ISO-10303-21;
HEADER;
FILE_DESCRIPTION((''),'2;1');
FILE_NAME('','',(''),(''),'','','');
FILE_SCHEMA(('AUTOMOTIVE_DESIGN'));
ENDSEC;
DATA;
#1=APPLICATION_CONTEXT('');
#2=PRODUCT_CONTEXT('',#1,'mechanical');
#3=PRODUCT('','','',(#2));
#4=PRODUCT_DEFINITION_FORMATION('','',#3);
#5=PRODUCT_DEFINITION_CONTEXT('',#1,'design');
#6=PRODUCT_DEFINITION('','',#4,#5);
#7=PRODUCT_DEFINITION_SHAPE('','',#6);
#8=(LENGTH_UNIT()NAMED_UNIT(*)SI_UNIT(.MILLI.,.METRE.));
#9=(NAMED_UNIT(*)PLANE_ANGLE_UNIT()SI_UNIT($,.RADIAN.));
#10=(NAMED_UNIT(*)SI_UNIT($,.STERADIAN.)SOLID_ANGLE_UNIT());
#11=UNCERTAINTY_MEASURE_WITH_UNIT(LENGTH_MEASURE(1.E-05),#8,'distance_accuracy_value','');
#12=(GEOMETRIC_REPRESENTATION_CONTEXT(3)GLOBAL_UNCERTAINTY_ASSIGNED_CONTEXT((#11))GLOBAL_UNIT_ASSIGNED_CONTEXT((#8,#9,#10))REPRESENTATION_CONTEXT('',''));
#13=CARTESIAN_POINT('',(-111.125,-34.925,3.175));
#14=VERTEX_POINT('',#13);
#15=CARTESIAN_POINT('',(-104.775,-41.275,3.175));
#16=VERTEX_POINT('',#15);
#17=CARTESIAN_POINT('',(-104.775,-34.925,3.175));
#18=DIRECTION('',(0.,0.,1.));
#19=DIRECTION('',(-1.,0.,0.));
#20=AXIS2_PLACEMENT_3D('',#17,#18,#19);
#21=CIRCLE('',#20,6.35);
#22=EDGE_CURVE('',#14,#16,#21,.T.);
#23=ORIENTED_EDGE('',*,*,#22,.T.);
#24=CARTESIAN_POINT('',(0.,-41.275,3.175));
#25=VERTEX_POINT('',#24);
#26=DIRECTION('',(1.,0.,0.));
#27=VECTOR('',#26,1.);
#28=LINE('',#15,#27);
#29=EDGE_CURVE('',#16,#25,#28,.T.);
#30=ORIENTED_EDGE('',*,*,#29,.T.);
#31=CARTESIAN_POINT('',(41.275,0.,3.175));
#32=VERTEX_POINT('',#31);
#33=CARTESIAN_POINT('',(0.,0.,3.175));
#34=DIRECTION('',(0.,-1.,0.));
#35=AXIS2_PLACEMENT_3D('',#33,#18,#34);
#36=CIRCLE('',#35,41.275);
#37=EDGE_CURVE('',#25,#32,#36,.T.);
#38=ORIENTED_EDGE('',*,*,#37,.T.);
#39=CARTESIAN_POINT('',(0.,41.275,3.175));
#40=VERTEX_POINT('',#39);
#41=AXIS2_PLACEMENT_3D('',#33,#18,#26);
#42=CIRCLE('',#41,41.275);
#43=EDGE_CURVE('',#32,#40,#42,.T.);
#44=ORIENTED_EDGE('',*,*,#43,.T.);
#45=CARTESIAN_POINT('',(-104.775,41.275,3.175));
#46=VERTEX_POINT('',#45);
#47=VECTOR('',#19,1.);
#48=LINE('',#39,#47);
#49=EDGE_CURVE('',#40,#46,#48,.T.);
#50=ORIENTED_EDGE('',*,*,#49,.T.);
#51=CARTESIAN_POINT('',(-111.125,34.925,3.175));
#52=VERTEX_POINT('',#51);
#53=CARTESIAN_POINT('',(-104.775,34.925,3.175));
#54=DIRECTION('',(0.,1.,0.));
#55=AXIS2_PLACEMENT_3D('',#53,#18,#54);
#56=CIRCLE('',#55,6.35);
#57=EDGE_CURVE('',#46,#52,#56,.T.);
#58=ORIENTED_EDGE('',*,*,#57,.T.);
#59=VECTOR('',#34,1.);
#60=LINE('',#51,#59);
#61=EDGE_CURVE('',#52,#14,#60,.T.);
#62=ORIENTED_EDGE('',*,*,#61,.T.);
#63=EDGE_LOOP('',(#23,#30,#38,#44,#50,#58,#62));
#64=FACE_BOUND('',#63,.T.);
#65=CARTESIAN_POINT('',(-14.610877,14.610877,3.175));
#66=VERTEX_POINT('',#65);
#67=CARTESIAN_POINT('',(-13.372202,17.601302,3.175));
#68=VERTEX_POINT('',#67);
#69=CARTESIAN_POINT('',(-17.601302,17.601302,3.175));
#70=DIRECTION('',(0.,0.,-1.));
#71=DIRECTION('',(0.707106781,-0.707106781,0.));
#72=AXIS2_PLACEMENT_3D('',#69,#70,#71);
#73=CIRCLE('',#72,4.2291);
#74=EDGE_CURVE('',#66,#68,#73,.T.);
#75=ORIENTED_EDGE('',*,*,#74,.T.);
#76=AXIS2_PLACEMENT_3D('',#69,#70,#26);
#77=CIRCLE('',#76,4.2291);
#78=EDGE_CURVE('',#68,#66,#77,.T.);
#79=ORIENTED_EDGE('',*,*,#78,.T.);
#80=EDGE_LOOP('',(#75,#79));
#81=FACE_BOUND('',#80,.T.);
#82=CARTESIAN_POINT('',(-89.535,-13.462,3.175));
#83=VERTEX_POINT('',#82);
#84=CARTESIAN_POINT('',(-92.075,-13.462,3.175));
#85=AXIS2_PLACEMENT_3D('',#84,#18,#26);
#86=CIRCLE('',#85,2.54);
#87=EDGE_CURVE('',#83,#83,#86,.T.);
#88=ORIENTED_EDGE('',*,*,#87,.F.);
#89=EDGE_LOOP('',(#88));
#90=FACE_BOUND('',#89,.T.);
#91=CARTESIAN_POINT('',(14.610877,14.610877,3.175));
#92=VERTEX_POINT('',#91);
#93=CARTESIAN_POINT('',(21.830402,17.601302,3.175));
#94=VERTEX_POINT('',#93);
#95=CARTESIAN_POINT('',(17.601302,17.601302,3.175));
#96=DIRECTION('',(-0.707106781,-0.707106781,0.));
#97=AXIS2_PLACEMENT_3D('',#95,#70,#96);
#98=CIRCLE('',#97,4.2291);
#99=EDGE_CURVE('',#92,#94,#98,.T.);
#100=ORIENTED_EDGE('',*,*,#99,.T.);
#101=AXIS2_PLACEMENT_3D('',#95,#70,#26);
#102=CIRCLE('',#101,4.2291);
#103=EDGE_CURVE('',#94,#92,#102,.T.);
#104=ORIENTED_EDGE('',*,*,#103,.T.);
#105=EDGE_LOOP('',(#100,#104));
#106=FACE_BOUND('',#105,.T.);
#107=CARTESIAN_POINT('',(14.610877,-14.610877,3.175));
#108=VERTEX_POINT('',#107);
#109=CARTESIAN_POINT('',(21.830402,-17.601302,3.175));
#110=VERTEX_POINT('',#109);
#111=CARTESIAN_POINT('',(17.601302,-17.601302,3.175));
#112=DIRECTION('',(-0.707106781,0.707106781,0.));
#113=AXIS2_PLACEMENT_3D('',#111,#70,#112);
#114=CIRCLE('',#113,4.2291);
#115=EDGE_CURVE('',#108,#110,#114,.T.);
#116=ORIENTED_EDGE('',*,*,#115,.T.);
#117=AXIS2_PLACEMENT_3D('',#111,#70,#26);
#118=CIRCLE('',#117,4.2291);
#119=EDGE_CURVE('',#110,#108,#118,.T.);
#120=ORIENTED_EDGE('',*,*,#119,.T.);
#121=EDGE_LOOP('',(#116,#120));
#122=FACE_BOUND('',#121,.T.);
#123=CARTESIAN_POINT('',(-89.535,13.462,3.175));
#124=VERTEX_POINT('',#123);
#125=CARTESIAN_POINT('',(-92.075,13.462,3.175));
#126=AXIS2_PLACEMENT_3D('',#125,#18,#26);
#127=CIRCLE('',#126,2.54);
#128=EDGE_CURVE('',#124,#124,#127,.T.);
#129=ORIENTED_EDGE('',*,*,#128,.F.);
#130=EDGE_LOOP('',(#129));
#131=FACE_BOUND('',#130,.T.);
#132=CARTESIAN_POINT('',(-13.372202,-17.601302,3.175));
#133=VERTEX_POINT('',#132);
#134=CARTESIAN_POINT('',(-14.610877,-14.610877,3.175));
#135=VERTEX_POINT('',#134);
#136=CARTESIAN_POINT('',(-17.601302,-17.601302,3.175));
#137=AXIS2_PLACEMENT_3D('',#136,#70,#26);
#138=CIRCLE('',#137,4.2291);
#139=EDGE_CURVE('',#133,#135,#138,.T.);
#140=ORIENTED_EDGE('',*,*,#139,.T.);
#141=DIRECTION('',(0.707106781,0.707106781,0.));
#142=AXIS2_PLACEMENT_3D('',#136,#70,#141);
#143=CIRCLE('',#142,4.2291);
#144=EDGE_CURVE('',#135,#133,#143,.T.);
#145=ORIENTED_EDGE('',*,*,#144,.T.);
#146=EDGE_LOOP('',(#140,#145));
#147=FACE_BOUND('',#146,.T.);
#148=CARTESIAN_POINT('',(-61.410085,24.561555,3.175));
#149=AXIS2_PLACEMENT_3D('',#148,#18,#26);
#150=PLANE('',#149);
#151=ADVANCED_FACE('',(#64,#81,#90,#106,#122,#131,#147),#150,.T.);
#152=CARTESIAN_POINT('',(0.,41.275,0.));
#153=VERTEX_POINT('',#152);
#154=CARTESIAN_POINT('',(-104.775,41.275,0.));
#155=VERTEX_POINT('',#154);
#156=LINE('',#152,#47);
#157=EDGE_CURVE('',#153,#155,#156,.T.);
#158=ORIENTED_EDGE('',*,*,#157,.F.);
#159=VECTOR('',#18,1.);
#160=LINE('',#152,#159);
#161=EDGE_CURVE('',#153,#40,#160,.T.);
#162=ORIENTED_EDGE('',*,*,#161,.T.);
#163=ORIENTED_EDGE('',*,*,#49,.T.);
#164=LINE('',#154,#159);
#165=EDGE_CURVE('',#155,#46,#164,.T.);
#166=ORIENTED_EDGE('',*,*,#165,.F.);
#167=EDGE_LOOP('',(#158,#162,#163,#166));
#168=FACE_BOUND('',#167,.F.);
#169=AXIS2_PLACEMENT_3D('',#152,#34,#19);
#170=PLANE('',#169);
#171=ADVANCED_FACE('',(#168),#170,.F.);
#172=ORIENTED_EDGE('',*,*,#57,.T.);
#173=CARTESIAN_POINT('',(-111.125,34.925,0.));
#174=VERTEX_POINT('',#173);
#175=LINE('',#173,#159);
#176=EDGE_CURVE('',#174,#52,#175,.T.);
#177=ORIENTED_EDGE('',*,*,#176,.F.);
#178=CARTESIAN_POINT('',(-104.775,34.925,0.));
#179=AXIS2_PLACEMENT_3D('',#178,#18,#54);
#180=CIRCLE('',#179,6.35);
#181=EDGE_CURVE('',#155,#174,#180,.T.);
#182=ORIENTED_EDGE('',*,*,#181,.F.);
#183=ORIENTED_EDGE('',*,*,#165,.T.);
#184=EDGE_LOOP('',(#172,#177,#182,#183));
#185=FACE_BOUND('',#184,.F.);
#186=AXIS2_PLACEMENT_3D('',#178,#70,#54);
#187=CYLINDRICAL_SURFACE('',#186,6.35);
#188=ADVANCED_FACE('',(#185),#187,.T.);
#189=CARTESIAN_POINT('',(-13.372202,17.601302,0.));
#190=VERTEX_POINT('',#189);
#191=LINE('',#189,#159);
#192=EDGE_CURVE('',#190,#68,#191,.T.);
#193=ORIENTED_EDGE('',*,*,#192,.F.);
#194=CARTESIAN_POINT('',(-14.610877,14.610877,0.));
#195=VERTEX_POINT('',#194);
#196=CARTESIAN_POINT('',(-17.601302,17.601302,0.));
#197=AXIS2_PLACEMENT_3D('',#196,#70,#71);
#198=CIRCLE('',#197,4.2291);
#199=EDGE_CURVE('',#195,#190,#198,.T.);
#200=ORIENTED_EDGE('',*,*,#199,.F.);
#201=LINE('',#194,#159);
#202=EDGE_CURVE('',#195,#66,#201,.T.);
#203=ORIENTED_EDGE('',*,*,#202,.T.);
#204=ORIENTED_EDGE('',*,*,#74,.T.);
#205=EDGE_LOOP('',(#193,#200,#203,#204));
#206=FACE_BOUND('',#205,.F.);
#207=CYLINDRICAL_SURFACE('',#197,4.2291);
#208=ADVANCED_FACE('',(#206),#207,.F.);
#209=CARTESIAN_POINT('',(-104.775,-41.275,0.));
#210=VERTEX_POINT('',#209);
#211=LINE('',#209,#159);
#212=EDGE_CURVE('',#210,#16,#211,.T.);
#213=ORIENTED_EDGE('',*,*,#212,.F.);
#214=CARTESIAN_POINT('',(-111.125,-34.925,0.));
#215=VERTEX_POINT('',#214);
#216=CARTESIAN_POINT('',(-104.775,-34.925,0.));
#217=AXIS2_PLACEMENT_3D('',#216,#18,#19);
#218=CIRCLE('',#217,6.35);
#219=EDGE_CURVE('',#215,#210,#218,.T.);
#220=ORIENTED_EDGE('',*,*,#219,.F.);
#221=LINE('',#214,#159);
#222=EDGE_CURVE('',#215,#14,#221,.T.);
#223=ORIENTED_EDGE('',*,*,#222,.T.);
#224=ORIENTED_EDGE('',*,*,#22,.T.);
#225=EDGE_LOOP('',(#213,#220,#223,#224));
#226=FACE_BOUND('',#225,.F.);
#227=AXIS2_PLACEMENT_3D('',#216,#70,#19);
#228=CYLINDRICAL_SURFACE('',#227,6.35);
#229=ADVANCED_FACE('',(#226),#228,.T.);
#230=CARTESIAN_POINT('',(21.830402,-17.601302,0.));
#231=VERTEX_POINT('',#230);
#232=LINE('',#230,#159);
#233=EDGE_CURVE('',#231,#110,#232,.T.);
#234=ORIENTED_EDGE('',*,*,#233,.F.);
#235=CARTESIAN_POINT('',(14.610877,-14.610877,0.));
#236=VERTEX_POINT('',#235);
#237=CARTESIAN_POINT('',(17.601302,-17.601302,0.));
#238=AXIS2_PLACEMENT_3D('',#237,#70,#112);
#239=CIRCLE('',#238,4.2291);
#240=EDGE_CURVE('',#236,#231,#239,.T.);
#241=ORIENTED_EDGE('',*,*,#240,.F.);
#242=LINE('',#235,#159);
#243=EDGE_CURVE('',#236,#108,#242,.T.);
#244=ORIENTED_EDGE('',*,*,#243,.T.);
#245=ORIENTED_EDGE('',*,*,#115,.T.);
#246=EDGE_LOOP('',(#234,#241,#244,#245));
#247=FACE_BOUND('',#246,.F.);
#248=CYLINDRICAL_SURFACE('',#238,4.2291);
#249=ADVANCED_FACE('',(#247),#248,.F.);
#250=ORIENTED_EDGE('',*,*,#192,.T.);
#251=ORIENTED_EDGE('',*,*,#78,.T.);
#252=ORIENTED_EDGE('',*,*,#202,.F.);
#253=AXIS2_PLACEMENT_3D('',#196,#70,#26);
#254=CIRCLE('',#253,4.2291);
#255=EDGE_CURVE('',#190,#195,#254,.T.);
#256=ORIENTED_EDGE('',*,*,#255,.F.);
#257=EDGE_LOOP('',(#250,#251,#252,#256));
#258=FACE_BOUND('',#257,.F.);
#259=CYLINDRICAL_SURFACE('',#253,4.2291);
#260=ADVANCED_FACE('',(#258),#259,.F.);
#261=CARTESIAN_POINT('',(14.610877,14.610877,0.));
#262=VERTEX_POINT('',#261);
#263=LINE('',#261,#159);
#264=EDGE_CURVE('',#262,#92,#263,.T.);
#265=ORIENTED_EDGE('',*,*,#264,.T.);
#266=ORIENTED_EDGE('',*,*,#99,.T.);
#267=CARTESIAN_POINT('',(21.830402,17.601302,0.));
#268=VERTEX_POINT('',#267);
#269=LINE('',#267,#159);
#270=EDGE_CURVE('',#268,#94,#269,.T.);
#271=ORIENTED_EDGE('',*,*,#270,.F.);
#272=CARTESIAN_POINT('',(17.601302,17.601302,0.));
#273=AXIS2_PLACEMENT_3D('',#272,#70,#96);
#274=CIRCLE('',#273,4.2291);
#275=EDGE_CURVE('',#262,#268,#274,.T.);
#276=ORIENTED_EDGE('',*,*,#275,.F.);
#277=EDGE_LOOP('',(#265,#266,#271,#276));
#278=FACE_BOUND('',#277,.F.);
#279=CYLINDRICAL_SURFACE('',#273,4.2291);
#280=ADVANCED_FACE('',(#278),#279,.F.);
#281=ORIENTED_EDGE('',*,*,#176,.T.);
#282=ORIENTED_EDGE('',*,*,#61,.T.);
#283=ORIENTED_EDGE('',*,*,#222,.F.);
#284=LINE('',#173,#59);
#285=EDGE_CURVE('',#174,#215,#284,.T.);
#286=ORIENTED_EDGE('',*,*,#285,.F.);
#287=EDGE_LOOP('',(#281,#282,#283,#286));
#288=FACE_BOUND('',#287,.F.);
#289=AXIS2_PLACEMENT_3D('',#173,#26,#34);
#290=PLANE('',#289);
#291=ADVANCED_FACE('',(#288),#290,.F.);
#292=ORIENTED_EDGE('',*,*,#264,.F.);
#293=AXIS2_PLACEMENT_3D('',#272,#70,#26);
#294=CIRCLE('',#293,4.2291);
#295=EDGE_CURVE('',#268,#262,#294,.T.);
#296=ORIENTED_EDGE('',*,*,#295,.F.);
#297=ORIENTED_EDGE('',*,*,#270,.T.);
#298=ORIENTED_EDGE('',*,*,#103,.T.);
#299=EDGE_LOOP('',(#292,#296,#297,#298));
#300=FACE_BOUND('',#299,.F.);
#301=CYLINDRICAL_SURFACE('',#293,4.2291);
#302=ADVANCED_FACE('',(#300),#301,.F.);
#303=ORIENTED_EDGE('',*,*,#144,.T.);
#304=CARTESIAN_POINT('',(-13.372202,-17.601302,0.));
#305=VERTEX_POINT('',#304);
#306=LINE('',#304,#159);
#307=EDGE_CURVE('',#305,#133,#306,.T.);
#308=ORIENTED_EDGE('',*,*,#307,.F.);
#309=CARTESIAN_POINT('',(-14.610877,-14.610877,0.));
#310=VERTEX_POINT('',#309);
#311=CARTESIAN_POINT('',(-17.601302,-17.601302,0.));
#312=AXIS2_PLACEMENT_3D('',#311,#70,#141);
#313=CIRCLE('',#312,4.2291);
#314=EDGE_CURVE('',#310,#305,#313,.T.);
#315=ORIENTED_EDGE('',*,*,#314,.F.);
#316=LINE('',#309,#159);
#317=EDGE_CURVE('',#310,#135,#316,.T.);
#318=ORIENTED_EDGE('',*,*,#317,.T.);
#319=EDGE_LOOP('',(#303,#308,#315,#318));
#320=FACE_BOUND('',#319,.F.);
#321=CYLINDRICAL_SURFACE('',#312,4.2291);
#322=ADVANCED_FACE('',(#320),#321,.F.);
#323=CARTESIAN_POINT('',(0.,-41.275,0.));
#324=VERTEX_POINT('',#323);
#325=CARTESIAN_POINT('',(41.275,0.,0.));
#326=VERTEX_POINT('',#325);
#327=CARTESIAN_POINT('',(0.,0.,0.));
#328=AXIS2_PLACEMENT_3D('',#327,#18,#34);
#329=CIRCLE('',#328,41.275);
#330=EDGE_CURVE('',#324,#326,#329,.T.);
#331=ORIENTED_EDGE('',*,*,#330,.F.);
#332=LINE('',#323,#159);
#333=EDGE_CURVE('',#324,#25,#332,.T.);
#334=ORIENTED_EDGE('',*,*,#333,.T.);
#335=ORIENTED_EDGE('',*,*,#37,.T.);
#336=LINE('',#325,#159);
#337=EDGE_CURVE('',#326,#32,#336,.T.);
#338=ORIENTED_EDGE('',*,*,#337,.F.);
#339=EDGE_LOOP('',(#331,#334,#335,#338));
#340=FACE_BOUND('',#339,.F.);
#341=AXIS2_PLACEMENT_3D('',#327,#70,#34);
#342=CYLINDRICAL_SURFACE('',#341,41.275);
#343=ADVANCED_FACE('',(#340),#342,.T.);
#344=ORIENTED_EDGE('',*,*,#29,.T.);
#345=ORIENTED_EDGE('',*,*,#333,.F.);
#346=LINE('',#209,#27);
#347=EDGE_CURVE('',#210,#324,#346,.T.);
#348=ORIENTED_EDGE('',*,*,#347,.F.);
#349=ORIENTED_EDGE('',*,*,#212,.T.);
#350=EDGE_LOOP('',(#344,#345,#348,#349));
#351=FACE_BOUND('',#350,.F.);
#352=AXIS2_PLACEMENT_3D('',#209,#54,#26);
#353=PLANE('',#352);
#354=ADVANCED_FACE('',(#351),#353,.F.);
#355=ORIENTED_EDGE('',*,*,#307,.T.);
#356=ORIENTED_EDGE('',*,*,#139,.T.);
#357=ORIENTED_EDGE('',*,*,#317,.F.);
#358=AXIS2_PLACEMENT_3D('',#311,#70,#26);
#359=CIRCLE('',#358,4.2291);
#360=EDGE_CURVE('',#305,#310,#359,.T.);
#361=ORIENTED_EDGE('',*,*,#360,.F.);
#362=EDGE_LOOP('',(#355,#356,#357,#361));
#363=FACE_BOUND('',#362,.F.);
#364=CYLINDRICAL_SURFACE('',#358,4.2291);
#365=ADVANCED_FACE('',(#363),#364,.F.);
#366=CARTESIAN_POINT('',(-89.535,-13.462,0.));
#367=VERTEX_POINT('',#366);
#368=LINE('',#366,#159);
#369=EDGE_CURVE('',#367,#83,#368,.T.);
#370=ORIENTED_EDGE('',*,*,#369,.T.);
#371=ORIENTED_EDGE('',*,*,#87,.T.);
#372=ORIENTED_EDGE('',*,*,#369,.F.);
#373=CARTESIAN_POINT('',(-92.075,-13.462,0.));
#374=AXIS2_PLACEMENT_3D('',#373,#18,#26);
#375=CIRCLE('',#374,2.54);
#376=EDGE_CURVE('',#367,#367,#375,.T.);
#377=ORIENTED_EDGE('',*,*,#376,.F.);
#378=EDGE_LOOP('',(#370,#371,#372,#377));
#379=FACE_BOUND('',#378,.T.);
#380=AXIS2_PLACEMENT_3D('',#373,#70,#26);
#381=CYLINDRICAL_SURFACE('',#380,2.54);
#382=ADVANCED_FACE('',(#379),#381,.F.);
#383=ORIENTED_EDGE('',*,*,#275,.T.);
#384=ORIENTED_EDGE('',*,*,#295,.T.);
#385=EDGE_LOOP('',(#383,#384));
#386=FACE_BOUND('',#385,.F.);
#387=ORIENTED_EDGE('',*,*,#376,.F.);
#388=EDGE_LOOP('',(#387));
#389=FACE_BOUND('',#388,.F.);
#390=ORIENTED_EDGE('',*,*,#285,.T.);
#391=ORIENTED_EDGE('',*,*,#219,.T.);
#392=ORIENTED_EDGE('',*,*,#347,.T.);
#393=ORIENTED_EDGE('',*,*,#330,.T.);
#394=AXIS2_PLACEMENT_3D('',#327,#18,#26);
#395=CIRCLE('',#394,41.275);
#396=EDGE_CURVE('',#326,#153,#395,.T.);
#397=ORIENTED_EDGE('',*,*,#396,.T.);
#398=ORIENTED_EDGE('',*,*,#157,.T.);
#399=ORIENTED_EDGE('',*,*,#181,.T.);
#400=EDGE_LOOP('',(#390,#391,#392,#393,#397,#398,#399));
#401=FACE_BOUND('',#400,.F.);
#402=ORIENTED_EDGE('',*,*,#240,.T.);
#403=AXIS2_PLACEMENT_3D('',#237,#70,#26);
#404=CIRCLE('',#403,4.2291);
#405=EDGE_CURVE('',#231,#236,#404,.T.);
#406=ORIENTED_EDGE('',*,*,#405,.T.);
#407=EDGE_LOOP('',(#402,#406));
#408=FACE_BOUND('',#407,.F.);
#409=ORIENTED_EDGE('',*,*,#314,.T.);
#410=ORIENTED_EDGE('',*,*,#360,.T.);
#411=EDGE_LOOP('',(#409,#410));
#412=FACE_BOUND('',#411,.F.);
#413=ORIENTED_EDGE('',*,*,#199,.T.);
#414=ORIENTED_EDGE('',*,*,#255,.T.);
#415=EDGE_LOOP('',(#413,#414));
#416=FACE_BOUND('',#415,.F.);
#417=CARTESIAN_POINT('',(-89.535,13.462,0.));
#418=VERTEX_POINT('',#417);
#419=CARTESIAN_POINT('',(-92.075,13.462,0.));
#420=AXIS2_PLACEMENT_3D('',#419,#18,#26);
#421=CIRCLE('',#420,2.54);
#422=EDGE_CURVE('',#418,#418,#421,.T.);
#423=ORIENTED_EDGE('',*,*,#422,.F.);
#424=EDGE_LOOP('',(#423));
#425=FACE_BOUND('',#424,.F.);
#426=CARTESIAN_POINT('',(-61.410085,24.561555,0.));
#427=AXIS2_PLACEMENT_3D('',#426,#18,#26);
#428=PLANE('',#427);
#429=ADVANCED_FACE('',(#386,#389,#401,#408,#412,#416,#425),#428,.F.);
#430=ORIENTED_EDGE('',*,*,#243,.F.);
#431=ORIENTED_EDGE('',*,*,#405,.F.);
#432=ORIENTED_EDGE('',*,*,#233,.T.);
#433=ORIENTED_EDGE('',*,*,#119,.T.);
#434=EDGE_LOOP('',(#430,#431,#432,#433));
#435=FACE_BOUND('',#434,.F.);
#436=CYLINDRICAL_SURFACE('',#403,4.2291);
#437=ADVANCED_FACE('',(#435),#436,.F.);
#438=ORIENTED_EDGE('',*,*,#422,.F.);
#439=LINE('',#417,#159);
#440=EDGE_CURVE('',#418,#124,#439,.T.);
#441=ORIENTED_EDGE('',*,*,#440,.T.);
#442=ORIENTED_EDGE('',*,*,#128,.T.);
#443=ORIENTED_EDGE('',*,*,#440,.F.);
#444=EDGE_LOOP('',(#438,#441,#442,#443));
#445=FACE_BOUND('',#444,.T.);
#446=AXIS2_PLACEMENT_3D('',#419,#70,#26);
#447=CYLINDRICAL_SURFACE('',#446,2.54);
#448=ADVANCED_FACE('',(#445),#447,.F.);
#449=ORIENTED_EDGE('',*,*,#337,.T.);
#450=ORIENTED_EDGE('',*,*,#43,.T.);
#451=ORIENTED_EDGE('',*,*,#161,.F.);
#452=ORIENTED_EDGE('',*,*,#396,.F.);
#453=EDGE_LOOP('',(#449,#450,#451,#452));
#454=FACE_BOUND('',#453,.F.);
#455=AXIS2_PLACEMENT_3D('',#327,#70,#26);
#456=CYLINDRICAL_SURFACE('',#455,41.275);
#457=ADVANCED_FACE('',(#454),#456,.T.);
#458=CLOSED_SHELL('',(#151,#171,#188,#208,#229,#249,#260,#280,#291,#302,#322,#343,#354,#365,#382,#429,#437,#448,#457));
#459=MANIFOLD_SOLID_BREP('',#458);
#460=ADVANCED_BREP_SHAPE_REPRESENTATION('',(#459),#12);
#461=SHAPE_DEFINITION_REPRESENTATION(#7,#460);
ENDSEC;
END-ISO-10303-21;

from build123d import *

# Parameters (mm, degrees)
F0_R     = 2.54
F1_DEPTH = 3.175


# Not quite as in the source:
# - a feature names something its author has since deleted; it is built from what else it names


with BuildPart() as f1:
    # F0 (on Top) → F1 (new body)
    with BuildSketch(Plane.XY):
        with BuildLine():
            ThreePointArc((-41.275, 0), (-29.1858323935, 29.1858323935), (0, 41.275))
            Line((0, 41.275), (-104.775, 41.275))
            ThreePointArc((-104.775, 41.275), (-109.2651280605, 39.4151280605), (-111.125, 34.925))
            Line((-111.125, 34.925), (-111.125, 0))
            Line((-111.125, 0), (-41.275, 0))
        make_face()
        with Locations((-92.075, 13.462)):
            Circle(F0_R, mode=Mode.SUBTRACT)
        with BuildLine():
            Line((-104.775, -41.275), (0, -41.275))
            ThreePointArc((0, -41.275), (-29.1858323935, -29.1858323935), (-41.275, 0))
            Line((-41.275, 0), (-111.125, 0))
            Line((-111.125, 0), (-111.125, -34.925))
            ThreePointArc((-111.125, -34.925), (-109.2651280605, -39.4151280605), (-104.775, -41.275))
        make_face()
        with Locations((-92.075, -13.462)):
            Circle(F0_R, mode=Mode.SUBTRACT)
        with BuildLine():
            Line((0, 2.8299858928), (0, 41.275))
            ThreePointArc((0, 41.275), (-29.1858323935, 29.1858323935), (-41.275, 0))
            Line((-41.275, 0), (0, 0))
            Line((0, 0), (0, 2.8299858928))
        make_face()
        with BuildLine():
            ThreePointArc((-13.3722019973, 17.6013019973), (-13.6941230664, 15.9828954935), (-14.610876709, 14.610876709))
            ThreePointArc((-14.610876709, 14.610876709), (-21.5084809282, 19.2197085011), (-13.3722019973, 17.6013019973))
        make_face(mode=Mode.SUBTRACT)
        with BuildLine():
            ThreePointArc((-41.275, 0), (-29.1858323935, -29.1858323935), (0, -41.275))
            Line((0, -41.275), (0, 0))
            Line((0, 0), (-41.275, 0))
        make_face()
        with BuildLine():
            ThreePointArc((-13.3722019973, -17.6013019973), (-21.5084809282, -19.2197085011), (-14.610876709, -14.610876709))
            ThreePointArc((-14.610876709, -14.610876709), (-13.6941230664, -15.9828954935), (-13.3722019973, -17.6013019973))
        make_face(mode=Mode.SUBTRACT)
        with BuildLine():
            ThreePointArc((0, -41.275), (29.1858323935, -29.1858323935), (41.275, 0))
            ThreePointArc((41.275, 0), (29.1858323935, 29.1858323935), (0, 41.275))
            Line((0, 41.275), (0, 2.8299858928))
            Line((0, 2.8299858928), (0, 0))
            Line((0, 0), (0, -41.275))
        make_face()
        with BuildLine():
            ThreePointArc((21.8304019973, -17.6013019973), (15.9828954935, -21.5084809282), (14.610876709, -14.610876709))
            ThreePointArc((14.610876709, -14.610876709), (19.2197085011, -13.6941230664), (21.8304019973, -17.6013019973))
        make_face(mode=Mode.SUBTRACT)
        with BuildLine():
            ThreePointArc((21.8304019973, 17.6013019973), (19.2197085011, 13.6941230664), (14.610876709, 14.610876709))
            ThreePointArc((14.610876709, 14.610876709), (15.9828954935, 21.5084809282), (21.8304019973, 17.6013019973))
        make_face(mode=Mode.SUBTRACT)
    extrude(amount=F1_DEPTH)


solid = f1.part
